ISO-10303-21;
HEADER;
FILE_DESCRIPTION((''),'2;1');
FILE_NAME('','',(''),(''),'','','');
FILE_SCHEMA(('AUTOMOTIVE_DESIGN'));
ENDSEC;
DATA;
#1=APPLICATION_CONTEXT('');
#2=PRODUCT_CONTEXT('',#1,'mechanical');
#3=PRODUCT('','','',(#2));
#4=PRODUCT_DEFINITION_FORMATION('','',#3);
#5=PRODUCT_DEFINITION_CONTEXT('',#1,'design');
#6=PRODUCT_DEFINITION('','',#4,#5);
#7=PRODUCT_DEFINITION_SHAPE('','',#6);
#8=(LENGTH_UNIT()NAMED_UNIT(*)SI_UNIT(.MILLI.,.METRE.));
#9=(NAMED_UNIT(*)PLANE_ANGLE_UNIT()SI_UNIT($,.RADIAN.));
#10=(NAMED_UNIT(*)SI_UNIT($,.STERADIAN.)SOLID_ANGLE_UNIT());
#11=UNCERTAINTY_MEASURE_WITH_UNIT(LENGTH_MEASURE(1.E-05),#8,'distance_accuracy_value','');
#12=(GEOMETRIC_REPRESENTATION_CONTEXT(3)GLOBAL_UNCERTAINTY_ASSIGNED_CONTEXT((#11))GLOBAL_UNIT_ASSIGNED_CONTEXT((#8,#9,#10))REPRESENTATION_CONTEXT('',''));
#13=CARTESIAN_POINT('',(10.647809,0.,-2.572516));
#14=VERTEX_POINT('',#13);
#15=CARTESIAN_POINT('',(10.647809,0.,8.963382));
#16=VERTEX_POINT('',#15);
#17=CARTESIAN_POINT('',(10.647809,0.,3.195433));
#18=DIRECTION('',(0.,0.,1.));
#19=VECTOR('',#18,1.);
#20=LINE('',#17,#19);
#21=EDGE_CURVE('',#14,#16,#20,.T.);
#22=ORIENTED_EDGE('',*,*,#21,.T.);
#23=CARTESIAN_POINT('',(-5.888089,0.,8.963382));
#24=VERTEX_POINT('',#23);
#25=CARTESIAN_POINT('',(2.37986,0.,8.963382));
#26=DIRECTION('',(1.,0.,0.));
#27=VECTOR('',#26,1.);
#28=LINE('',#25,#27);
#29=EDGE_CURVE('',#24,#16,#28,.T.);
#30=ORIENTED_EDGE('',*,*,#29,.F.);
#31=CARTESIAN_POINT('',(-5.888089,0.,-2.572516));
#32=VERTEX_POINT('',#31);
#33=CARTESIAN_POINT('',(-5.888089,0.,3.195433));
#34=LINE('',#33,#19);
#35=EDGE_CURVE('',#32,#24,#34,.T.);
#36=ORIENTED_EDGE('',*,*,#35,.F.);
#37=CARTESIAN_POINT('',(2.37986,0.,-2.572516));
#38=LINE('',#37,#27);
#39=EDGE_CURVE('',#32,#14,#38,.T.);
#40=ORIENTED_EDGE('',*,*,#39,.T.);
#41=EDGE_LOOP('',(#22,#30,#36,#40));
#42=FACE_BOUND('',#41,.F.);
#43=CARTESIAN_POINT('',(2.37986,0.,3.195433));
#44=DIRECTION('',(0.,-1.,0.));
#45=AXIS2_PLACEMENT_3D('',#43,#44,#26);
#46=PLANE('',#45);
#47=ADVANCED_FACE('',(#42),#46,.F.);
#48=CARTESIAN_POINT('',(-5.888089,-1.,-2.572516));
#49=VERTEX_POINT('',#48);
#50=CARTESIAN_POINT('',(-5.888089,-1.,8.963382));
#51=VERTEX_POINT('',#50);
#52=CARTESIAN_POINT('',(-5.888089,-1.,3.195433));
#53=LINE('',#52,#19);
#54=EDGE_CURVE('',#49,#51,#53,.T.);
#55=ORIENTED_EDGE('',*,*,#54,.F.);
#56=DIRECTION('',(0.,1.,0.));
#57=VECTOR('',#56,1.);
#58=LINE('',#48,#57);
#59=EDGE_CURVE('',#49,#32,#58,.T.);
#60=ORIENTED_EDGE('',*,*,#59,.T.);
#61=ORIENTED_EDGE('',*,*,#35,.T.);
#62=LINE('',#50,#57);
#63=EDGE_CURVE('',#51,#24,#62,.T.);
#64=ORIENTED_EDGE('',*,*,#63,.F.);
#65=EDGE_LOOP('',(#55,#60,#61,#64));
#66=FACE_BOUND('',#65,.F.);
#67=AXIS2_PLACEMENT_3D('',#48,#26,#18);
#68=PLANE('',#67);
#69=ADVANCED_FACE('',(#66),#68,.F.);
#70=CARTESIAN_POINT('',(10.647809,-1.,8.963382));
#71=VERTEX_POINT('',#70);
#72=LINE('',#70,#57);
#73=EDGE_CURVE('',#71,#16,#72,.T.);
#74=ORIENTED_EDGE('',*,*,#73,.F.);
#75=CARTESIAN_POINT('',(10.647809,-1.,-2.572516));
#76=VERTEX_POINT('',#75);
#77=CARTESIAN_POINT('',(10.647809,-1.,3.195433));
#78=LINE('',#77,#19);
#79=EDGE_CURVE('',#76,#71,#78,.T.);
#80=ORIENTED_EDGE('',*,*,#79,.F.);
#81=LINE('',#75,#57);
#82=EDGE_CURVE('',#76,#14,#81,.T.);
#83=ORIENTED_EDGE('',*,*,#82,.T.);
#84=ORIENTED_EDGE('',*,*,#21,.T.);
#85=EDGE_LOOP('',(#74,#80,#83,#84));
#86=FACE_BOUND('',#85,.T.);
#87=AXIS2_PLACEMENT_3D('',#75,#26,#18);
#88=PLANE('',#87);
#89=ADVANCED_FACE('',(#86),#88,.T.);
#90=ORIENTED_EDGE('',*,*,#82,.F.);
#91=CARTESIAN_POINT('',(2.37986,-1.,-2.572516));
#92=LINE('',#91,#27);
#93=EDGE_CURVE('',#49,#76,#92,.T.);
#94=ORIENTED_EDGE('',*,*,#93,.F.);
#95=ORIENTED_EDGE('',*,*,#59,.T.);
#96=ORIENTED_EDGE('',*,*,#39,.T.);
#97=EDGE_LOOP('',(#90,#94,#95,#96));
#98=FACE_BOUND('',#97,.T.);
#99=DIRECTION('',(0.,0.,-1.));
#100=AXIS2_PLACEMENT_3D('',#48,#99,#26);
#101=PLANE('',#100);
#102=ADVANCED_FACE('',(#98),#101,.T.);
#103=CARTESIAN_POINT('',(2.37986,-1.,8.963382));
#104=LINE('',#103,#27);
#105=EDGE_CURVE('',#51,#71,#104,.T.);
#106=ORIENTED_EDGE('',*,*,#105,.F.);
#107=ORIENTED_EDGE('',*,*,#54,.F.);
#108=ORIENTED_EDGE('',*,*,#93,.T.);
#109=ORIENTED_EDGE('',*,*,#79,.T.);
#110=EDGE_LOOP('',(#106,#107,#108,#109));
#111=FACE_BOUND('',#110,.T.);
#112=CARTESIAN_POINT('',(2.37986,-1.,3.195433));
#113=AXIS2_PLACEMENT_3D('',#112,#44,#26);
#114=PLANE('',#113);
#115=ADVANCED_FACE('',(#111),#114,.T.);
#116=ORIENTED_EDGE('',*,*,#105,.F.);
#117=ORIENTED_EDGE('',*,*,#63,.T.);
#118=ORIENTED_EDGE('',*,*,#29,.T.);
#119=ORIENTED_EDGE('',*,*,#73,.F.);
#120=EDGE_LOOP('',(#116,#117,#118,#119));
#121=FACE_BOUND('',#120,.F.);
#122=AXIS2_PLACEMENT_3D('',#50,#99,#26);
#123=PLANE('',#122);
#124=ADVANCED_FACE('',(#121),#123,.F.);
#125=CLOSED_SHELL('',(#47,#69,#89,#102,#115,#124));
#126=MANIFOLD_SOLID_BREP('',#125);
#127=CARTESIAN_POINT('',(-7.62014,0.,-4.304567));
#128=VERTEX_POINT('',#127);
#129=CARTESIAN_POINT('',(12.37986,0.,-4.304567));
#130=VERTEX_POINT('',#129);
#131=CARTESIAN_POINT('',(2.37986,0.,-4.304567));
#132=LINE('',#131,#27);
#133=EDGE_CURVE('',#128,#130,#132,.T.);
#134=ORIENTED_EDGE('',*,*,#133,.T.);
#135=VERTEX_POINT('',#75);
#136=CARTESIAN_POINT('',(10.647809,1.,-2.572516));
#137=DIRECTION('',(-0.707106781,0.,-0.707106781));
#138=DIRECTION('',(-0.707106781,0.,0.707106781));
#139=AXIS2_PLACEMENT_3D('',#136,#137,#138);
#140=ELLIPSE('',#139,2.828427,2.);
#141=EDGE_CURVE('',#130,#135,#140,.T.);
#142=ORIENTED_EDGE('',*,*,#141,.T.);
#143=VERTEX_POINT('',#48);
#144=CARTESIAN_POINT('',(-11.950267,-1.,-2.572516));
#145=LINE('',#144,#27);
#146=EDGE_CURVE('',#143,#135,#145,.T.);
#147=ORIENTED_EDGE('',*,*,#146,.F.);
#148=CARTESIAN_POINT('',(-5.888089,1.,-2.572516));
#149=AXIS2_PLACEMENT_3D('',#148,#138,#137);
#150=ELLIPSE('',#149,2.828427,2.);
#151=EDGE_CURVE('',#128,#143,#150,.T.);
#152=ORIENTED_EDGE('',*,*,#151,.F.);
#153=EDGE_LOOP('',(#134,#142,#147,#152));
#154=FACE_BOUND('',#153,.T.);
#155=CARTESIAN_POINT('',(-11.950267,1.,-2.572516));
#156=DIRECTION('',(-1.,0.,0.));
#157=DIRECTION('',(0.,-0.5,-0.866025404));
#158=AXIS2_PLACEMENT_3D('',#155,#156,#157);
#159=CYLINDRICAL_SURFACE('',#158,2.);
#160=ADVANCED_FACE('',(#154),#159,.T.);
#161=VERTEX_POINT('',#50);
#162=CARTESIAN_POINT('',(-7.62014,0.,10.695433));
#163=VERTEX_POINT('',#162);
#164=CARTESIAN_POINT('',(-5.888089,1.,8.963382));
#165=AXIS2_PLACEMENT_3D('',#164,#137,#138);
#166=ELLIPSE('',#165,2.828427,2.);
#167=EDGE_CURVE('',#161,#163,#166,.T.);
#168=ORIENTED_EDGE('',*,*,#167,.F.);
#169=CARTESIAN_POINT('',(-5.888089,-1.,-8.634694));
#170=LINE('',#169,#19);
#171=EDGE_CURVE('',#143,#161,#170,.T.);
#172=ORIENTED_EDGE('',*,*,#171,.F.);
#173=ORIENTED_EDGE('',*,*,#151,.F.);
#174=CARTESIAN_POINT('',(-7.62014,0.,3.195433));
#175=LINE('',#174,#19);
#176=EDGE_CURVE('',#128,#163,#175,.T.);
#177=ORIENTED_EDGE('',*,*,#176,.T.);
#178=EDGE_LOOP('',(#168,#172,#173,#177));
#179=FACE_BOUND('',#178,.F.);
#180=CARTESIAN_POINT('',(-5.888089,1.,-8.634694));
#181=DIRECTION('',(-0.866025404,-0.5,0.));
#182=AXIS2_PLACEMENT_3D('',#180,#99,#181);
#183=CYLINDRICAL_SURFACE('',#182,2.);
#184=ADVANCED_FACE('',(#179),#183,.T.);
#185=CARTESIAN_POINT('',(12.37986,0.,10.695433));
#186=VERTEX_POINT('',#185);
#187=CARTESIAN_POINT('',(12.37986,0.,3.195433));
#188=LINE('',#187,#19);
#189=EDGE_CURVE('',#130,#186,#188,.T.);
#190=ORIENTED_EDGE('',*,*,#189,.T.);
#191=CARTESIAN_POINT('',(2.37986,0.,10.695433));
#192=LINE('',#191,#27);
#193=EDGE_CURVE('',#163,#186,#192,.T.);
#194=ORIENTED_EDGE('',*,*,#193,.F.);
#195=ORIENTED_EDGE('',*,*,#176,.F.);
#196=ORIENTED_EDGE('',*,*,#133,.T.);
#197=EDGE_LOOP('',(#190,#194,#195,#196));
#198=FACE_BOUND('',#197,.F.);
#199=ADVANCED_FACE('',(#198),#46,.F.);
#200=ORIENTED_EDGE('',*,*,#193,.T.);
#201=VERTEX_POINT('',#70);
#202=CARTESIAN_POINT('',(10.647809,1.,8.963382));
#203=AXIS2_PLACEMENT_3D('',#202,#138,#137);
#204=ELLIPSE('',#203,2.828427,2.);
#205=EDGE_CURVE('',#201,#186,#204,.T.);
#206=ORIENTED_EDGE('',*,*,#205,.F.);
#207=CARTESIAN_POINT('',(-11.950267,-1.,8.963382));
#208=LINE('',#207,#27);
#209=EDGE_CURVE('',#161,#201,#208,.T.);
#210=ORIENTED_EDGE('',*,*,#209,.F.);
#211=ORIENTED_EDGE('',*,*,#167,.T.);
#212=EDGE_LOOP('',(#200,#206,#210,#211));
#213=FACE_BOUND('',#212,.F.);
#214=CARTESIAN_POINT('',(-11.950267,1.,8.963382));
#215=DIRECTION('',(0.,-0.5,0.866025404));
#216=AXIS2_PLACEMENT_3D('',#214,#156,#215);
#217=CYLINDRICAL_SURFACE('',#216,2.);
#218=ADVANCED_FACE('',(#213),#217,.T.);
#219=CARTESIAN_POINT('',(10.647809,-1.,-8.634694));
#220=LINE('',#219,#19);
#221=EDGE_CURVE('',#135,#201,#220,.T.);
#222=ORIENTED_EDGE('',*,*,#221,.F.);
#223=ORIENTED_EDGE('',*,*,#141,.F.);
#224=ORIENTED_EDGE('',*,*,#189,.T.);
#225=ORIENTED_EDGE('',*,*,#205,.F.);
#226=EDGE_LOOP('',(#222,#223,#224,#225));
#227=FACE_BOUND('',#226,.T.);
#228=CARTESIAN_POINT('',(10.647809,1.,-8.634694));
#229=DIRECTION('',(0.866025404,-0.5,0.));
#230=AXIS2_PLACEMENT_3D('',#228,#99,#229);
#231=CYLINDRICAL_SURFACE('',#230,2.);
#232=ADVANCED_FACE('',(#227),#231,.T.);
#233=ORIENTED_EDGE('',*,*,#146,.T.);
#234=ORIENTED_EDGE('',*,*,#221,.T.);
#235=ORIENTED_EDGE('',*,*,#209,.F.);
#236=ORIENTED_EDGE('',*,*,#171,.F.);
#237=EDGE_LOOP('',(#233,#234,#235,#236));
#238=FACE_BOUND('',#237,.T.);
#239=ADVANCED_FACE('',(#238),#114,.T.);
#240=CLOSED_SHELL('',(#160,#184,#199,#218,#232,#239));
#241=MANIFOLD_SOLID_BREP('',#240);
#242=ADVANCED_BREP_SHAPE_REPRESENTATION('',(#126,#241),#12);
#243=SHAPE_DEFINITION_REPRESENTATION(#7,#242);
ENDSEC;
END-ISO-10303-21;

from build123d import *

# Parameters (mm, degrees)
F0_W        = 20
F0_H        = 15
F1_DEPTH    = 1
F2_T1_DEPTH = 28.6602540378
F2_T3_DEPTH = 23.6602540378
F3_W        = 16.5358983849
F3_H        = 11.5358983849
F4_DEPTH    = 1


# Not quite as in the source:
# - a fillet or chamfer that OpenCascade refuses, or shapes differently, is made with other operations: its cross-section is extruded or revolved along the edge and cut away or added


with BuildPart() as f1:
    # F0 (on Front) → F1 (new body)
    with BuildSketch(Plane.XZ):
        with Locations((2.3798597425, 3.1954329461)):
            Rectangle(F0_W, F0_H)
    extrude(amount=F1_DEPTH)

    # F2: fillet of radius 2 on 4 edges, made by hand

    # F2_s2 → F2_t1 (cut)
    with BuildSketch(Plane.YZ.offset(-11.9502672764)):
        with BuildLine():
            ThreePointArc((0, 10.6954329461), (-0.7320508076, 9.9633821385), (-1, 8.9633821385))
            Line((-1, 8.9633821385), (-1, 10.6954329461))
            Line((-1, 10.6954329461), (0, 10.6954329461))
        make_face()
        with BuildLine():
            ThreePointArc((0, -4.3045670539), (-0.7320508076, -3.5725162463), (-1, -2.5725162463))
            Line((-1, -2.5725162463), (-1, -4.3045670539))
            Line((-1, -4.3045670539), (0, -4.3045670539))
        make_face()
    extrude(amount=F2_T1_DEPTH, mode=Mode.SUBTRACT)

    # F2_s4 → F2_t3 (cut)
    with BuildSketch(Plane.XY.offset(-8.6346940728)):
        with BuildLine():
            ThreePointArc((12.3798597425, 0), (11.6478089349, -0.7320508076), (10.6478089349, -1))
            Line((10.6478089349, -1), (12.3798597425, -1))
            Line((12.3798597425, -1), (12.3798597425, 0))
        make_face()
        with BuildLine():
            ThreePointArc((-7.6201402575, 0), (-6.8880894499, -0.7320508076), (-5.8880894499, -1))
            Line((-5.8880894499, -1), (-7.6201402575, -1))
            Line((-7.6201402575, -1), (-7.6201402575, 0))
        make_face()
    extrude(amount=F2_T3_DEPTH, mode=Mode.SUBTRACT)


with BuildPart() as f4:
    # F3 (on face) → F4 (new body)
    with BuildSketch(Plane.XZ.offset(1)):
        with Locations((2.3798597425, 3.1954329461)):
            Rectangle(F3_W, F3_H)
    extrude(amount=-F4_DEPTH)


solid = Compound([f1.part, f4.part])
